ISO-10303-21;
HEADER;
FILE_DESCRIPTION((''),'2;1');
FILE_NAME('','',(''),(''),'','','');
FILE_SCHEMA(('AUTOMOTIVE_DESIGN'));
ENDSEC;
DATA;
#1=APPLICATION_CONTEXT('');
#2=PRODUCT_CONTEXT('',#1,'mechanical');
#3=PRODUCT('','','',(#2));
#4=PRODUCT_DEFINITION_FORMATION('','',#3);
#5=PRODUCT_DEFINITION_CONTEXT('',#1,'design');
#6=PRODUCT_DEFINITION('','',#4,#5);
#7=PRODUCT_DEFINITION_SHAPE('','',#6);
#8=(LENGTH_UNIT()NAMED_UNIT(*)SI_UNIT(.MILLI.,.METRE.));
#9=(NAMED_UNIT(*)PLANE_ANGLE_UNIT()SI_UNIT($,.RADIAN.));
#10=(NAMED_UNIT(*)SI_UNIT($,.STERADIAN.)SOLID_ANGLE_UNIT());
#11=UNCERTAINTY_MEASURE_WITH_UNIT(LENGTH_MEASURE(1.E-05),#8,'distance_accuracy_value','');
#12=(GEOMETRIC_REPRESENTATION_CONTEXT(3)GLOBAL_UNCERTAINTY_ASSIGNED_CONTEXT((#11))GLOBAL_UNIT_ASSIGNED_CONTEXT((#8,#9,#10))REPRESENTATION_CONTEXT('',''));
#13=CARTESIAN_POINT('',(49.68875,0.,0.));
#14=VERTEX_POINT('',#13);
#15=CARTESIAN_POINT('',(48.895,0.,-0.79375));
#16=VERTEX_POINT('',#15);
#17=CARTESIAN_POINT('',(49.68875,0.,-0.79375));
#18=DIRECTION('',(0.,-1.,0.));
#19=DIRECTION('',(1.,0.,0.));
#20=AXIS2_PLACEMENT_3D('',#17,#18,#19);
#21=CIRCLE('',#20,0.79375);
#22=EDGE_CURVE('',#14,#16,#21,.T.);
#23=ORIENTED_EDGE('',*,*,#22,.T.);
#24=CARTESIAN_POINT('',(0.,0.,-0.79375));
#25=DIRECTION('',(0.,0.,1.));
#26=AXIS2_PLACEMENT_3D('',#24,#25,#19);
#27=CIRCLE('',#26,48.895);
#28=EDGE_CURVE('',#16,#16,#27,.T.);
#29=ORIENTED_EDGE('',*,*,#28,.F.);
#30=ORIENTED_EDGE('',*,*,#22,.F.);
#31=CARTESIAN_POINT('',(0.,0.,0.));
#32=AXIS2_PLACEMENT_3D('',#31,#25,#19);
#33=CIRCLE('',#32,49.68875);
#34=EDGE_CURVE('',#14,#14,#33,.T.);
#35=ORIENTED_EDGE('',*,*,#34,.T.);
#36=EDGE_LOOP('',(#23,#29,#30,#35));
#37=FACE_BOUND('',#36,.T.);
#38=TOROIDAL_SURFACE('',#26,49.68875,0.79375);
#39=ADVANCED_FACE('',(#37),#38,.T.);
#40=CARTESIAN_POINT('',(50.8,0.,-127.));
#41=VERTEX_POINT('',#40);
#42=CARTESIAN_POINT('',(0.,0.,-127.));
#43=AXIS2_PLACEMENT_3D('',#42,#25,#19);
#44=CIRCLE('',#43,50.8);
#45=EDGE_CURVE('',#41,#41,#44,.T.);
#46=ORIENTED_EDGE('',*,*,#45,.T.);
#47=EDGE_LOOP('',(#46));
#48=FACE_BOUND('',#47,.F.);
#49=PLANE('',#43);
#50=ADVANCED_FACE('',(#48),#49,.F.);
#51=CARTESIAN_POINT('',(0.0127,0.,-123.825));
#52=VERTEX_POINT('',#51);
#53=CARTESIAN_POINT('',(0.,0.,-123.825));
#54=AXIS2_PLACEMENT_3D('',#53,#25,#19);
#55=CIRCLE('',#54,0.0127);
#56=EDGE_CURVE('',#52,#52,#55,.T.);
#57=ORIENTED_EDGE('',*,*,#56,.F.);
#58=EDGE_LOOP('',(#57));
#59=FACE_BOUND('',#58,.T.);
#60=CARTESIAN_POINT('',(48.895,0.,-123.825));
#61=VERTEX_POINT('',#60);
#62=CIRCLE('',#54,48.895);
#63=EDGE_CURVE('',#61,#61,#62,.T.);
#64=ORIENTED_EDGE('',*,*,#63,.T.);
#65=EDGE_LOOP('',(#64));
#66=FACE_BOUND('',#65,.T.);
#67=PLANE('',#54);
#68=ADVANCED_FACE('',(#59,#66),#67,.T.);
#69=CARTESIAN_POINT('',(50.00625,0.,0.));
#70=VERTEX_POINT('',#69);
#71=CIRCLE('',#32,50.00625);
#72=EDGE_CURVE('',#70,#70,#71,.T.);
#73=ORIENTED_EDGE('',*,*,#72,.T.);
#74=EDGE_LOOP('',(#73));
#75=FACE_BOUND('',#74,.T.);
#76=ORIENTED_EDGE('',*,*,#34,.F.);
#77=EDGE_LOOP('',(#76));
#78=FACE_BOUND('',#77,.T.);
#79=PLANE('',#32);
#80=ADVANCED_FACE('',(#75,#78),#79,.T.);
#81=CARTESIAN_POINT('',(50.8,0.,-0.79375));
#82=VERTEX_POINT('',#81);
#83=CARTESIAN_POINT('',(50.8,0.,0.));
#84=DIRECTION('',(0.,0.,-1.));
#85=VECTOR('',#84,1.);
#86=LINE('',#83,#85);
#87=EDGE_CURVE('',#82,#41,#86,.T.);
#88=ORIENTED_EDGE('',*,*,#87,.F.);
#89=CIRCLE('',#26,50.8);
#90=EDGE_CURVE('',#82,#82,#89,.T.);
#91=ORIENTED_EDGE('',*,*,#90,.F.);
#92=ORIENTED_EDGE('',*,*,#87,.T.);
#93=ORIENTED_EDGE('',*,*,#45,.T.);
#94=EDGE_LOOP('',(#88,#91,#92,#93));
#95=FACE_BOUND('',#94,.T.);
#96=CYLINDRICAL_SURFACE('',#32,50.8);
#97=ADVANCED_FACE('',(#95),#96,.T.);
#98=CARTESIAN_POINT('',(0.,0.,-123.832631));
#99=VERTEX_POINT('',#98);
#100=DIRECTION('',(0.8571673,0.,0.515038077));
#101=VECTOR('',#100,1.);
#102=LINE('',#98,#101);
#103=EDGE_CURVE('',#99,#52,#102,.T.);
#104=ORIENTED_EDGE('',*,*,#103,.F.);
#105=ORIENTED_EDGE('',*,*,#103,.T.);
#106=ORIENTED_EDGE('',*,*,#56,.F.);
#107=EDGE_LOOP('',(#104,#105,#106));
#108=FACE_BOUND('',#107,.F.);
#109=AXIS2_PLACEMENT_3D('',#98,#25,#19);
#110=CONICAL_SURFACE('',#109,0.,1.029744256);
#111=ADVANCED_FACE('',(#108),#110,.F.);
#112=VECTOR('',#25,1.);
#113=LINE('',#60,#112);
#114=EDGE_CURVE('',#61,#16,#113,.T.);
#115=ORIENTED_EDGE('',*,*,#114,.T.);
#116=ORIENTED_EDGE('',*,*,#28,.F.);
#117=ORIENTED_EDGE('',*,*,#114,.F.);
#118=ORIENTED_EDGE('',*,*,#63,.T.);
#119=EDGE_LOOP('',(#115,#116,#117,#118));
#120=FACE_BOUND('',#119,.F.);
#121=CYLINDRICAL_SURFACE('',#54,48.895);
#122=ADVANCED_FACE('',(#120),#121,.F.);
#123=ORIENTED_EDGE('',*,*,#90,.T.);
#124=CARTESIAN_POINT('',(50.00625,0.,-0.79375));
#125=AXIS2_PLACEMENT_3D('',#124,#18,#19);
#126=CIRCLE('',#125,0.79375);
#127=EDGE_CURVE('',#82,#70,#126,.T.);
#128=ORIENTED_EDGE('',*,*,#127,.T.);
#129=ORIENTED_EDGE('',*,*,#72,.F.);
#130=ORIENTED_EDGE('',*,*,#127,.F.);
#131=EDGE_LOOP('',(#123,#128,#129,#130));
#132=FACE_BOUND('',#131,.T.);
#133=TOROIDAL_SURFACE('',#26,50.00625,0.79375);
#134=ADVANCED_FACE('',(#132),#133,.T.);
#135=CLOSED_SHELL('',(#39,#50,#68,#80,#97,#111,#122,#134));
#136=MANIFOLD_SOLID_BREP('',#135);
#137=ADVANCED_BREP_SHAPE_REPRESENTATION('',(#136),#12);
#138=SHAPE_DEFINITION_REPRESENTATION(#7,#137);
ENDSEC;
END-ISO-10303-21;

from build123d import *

# Parameters (mm, degrees)
F0_R           = 50.8
F1_DEPTH       = 127
F3_D           = 0.0254
F3_DEPTH       = 123.825
F3_CBORE_D     = 97.79
F3_CBORE_DEPTH = 123.825
F3_TIP         = 0.0076309299
F4_R           = 0.79375


with BuildPart() as f1:
    # F0 (on Top) → F1 (new body)
    with BuildSketch(Plane.XY):
        Circle(F0_R)
    extrude(amount=-F1_DEPTH)

    # F3
    with Locations(Plane.XY):
        with Locations((0, 0)):
            CounterBoreHole(F3_D / 2, F3_CBORE_D / 2, F3_CBORE_DEPTH, depth=F3_DEPTH)
            with Locations((0, 0, -(F3_DEPTH + F3_TIP / 2))):  # 118° drill point
                Cone(0, F3_D / 2, F3_TIP, mode=Mode.SUBTRACT)

    # F4
    f4_edges = [f1.edges().sort_by_distance(p)[0] for p in [
        (-50.8, 0, 0),
        (-48.895, 0, 0),
    ]]
    fillet(f4_edges, radius=F4_R)


solid = f1.part
